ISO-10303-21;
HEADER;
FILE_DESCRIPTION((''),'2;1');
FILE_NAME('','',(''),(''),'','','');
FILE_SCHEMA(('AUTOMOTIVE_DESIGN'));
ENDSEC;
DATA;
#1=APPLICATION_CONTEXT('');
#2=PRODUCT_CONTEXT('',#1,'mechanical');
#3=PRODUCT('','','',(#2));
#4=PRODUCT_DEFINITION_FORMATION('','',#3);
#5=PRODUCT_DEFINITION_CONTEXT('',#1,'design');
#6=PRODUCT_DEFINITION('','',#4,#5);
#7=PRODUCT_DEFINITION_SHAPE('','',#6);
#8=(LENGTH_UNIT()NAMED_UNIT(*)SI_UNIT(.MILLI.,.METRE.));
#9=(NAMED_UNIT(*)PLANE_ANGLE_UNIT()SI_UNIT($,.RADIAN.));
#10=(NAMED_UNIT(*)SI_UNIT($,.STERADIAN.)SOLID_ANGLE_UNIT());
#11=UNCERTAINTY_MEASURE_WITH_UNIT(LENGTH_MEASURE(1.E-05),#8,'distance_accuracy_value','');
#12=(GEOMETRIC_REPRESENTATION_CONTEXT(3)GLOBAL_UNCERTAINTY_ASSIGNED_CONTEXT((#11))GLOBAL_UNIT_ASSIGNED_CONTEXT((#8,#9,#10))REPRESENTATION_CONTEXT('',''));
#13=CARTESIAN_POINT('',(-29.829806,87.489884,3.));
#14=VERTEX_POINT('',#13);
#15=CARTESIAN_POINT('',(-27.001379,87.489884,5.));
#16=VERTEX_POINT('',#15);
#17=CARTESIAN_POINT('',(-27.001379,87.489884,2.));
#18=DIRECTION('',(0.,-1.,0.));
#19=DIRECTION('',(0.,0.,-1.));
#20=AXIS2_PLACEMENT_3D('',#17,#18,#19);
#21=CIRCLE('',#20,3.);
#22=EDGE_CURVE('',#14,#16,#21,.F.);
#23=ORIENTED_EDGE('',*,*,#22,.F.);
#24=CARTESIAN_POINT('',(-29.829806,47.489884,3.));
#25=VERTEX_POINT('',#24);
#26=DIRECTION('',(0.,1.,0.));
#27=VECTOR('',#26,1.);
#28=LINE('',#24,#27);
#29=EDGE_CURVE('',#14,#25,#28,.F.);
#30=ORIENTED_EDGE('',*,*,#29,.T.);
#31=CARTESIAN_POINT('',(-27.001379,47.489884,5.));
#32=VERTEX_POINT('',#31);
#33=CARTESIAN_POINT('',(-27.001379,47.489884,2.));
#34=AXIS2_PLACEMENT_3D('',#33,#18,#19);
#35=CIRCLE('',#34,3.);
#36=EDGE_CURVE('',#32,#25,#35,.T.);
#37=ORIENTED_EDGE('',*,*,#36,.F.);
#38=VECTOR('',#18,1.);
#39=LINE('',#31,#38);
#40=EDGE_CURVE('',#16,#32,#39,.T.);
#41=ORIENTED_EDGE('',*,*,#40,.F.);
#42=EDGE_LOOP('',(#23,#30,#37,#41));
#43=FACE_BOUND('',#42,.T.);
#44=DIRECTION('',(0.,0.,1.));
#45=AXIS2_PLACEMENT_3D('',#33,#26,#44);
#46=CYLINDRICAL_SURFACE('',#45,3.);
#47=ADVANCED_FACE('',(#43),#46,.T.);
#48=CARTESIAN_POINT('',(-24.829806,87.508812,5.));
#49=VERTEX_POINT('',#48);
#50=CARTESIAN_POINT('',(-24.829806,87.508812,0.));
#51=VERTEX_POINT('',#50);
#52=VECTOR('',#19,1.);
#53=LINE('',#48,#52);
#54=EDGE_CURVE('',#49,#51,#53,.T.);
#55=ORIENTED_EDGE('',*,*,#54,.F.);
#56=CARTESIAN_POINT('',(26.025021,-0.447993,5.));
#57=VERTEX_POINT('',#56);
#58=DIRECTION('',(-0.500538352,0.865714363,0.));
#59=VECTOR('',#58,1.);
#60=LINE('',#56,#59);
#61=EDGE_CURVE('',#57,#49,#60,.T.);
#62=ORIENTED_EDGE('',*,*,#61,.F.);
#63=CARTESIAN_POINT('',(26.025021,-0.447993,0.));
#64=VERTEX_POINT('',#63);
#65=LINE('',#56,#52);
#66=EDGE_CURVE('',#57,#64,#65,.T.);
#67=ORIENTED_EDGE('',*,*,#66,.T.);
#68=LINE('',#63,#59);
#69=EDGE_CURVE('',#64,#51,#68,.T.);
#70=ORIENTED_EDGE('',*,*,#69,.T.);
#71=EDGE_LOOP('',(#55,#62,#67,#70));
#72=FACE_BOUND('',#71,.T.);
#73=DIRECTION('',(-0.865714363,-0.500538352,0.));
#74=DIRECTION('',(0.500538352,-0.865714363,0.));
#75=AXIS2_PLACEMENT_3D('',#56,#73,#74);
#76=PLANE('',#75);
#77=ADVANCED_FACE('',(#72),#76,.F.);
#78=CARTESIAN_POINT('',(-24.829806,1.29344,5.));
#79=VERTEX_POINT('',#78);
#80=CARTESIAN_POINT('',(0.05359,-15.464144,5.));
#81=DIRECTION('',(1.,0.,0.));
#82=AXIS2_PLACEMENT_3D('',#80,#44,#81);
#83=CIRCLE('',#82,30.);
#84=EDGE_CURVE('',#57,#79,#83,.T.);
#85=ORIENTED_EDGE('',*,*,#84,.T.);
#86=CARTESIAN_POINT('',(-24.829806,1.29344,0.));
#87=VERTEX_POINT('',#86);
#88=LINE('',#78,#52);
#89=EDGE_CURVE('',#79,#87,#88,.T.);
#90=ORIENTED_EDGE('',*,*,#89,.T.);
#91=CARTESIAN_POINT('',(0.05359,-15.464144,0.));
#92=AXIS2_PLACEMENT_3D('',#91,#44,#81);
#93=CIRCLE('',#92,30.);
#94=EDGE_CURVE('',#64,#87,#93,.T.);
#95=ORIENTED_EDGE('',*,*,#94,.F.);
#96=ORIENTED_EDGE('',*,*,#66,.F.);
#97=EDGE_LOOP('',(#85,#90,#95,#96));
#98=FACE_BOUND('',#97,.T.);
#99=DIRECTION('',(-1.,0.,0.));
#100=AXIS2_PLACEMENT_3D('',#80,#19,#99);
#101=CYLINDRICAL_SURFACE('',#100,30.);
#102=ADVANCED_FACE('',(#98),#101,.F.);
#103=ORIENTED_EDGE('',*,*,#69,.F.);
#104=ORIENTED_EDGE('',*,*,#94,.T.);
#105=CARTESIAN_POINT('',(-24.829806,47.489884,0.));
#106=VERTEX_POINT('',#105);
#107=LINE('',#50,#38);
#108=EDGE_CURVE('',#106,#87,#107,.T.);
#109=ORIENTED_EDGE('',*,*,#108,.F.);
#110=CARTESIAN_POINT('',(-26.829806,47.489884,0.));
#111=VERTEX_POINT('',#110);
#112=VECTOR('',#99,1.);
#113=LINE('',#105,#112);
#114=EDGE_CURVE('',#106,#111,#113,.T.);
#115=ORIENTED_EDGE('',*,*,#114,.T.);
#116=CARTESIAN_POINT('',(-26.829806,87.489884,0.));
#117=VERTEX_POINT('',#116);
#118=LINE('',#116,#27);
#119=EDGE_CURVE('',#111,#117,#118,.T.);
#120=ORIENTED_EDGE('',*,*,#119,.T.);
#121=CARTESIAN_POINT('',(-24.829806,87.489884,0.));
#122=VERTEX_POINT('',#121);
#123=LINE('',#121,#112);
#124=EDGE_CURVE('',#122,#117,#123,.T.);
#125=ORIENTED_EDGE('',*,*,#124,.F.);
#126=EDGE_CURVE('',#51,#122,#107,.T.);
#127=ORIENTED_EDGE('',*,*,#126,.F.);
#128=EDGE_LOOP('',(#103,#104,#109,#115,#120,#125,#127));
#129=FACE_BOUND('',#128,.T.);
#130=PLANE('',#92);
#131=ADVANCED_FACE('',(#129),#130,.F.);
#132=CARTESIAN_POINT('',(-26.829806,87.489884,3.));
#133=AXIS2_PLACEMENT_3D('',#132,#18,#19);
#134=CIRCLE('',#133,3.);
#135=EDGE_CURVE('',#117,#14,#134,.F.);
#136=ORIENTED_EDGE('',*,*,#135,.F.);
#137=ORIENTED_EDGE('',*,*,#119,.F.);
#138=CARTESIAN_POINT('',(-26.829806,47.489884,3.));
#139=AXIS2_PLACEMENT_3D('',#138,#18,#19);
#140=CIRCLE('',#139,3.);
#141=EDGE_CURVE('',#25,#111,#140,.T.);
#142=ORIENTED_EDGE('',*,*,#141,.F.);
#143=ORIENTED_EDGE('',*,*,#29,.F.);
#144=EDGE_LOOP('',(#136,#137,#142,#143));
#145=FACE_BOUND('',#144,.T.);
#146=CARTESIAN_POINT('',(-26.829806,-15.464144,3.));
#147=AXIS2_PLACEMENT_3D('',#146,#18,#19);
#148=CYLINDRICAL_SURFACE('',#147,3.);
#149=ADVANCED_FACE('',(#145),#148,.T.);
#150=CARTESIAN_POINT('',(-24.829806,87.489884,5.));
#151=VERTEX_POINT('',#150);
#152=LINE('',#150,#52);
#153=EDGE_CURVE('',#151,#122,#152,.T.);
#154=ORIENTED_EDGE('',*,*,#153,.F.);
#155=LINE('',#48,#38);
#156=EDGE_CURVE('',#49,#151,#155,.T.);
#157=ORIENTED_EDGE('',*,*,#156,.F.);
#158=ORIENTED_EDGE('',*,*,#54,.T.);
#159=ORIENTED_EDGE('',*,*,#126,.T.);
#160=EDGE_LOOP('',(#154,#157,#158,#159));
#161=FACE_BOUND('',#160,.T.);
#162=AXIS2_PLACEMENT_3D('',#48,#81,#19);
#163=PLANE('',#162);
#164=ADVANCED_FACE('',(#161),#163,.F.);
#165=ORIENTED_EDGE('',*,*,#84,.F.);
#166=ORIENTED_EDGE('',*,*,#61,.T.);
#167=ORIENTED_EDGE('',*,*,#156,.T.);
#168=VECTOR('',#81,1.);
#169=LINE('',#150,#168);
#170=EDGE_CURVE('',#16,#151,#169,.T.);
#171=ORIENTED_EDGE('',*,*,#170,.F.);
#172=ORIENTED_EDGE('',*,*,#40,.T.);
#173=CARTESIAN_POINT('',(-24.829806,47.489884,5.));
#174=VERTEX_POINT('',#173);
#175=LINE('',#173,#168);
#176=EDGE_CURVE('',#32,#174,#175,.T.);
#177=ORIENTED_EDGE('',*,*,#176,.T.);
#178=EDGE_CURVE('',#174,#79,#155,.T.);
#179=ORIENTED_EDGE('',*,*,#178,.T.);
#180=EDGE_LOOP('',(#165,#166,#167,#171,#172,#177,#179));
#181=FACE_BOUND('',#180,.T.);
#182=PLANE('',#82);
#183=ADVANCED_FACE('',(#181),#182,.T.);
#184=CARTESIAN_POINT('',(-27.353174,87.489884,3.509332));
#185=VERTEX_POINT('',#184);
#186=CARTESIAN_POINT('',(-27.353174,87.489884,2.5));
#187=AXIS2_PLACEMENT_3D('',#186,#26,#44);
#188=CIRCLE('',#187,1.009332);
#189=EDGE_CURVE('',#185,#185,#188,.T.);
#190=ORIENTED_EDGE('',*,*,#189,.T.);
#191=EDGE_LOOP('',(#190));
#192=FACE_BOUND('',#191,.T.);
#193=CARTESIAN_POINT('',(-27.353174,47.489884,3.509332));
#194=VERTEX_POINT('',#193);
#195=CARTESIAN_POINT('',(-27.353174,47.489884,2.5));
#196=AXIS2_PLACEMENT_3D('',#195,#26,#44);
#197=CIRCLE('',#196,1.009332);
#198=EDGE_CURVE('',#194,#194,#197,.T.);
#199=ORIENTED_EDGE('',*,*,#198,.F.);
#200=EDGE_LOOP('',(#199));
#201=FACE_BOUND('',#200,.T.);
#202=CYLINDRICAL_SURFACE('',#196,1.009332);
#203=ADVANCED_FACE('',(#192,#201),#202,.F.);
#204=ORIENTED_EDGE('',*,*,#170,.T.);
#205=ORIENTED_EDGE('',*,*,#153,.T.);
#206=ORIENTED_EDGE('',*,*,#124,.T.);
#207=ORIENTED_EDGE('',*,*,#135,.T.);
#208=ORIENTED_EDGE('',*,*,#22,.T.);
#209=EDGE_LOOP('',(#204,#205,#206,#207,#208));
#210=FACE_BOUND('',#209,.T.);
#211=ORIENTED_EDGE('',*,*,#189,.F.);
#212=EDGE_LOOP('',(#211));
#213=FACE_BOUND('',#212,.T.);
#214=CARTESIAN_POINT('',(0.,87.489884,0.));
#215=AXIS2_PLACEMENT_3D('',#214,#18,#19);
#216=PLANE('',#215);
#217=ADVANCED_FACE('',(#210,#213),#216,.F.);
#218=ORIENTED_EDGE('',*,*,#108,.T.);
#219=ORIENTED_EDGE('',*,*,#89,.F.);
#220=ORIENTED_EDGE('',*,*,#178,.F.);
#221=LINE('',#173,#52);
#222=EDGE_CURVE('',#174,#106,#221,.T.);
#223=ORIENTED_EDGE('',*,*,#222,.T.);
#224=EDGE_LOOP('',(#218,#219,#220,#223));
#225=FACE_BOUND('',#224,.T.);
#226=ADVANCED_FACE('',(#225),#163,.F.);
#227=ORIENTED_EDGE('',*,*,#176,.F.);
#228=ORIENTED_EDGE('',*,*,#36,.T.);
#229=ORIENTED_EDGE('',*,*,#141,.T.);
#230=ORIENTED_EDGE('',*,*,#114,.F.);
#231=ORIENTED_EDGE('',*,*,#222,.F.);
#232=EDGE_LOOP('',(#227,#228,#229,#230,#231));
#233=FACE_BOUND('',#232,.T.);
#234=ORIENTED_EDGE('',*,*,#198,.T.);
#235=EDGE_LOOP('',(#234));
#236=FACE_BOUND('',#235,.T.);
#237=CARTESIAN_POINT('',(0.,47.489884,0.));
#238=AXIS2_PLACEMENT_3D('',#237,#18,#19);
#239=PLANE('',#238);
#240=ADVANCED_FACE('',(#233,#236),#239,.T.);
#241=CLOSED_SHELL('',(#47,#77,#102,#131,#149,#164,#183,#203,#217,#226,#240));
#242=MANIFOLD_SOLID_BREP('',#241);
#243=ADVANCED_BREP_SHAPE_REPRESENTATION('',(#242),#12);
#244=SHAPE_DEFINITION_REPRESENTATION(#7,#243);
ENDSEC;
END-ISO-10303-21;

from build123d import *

# Parameters (mm, degrees)
BOSS_EXTRU_1_DEPTH      = 5
ESQUISSE9_W             = 5
ESQUISSE9_H             = 5
BOSS_EXTRU_3_DEPTH      = 40
ESQUISSE11_R            = 1.009332427
ENL_V_MAT_EXTRU_2_DEPTH = 40
CONG_1_R                = 3
CONG_2_R                = 3


with BuildPart() as part:
    # Esquisse1 → Boss.-Extru.1 (new body)
    with BuildSketch(Plane.XY):
        with BuildLine():
            Line((26.025021052, -0.447992933), (-24.829805977, 87.508811894))
            Line((-24.829805977, 87.508811894), (-24.829805977, 1.293439737))
            ThreePointArc((-24.829805977, 1.293439737), (1.080284786, 14.518282983), (26.025021052, -0.447992933))
        make_face()
    extrude(amount=BOSS_EXTRU_1_DEPTH)

    # Esquisse9 → Boss.-Extru.3 (add)
    with BuildSketch(Plane(origin=(0, 87.489884498, 0), x_dir=(1, 0, 0), z_dir=(0, 1, 0))):
        with Locations((-27.329805977, -2.5)):
            Rectangle(ESQUISSE9_W, ESQUISSE9_H)
    extrude(amount=-BOSS_EXTRU_3_DEPTH)

    # Esquisse11 → Enlèv. mat.-Extru.2 (cut)
    with BuildSketch(Plane(origin=(0, 87.489884498, 0), x_dir=(1, 0, 0), z_dir=(0, 1, 0))):
        with Locations(Location((-27.353173819, -2.5, 0), (0, 0, 270))):
            Circle(ESQUISSE11_R)
    extrude(amount=-ENL_V_MAT_EXTRU_2_DEPTH, mode=Mode.SUBTRACT)

    # Congé1
    cong_1_edges = [part.edges().sort_by_distance(p)[0] for p in [
        (-29.829805977, 67.489884498, 0),
    ]]
    fillet(cong_1_edges, radius=CONG_1_R)

    # Congé2
    # the kernel refuses this fillet: 3 mm, written as the material it takes off along each edge
    with BuildSketch(Plane(origin=(-29.829805977, 94.56095231, 5), x_dir=(0, 0, -1), z_dir=(0, -1, 0))) as cong_2_piece_1:
        with BuildLine():
            CenterArc((3, 2.828427125), CONG_2_R, 180, 70.528779366)
            Line((0, 2.828427125), (-0.06, 2.828427125))
            Line((-0.06, 2.828427125), (-0.06, 0))
            Line((-0.06, 0), (0, -0.06))
            ThreePointArc((0, -0.06), (1, -0.06), (1.98, -0.056568542))
            Line((1.98, -0.056568542), (2, 0))
        make_face()
    extrude(amount=54.142135624, mode=Mode.SUBTRACT)


solid = part.part
